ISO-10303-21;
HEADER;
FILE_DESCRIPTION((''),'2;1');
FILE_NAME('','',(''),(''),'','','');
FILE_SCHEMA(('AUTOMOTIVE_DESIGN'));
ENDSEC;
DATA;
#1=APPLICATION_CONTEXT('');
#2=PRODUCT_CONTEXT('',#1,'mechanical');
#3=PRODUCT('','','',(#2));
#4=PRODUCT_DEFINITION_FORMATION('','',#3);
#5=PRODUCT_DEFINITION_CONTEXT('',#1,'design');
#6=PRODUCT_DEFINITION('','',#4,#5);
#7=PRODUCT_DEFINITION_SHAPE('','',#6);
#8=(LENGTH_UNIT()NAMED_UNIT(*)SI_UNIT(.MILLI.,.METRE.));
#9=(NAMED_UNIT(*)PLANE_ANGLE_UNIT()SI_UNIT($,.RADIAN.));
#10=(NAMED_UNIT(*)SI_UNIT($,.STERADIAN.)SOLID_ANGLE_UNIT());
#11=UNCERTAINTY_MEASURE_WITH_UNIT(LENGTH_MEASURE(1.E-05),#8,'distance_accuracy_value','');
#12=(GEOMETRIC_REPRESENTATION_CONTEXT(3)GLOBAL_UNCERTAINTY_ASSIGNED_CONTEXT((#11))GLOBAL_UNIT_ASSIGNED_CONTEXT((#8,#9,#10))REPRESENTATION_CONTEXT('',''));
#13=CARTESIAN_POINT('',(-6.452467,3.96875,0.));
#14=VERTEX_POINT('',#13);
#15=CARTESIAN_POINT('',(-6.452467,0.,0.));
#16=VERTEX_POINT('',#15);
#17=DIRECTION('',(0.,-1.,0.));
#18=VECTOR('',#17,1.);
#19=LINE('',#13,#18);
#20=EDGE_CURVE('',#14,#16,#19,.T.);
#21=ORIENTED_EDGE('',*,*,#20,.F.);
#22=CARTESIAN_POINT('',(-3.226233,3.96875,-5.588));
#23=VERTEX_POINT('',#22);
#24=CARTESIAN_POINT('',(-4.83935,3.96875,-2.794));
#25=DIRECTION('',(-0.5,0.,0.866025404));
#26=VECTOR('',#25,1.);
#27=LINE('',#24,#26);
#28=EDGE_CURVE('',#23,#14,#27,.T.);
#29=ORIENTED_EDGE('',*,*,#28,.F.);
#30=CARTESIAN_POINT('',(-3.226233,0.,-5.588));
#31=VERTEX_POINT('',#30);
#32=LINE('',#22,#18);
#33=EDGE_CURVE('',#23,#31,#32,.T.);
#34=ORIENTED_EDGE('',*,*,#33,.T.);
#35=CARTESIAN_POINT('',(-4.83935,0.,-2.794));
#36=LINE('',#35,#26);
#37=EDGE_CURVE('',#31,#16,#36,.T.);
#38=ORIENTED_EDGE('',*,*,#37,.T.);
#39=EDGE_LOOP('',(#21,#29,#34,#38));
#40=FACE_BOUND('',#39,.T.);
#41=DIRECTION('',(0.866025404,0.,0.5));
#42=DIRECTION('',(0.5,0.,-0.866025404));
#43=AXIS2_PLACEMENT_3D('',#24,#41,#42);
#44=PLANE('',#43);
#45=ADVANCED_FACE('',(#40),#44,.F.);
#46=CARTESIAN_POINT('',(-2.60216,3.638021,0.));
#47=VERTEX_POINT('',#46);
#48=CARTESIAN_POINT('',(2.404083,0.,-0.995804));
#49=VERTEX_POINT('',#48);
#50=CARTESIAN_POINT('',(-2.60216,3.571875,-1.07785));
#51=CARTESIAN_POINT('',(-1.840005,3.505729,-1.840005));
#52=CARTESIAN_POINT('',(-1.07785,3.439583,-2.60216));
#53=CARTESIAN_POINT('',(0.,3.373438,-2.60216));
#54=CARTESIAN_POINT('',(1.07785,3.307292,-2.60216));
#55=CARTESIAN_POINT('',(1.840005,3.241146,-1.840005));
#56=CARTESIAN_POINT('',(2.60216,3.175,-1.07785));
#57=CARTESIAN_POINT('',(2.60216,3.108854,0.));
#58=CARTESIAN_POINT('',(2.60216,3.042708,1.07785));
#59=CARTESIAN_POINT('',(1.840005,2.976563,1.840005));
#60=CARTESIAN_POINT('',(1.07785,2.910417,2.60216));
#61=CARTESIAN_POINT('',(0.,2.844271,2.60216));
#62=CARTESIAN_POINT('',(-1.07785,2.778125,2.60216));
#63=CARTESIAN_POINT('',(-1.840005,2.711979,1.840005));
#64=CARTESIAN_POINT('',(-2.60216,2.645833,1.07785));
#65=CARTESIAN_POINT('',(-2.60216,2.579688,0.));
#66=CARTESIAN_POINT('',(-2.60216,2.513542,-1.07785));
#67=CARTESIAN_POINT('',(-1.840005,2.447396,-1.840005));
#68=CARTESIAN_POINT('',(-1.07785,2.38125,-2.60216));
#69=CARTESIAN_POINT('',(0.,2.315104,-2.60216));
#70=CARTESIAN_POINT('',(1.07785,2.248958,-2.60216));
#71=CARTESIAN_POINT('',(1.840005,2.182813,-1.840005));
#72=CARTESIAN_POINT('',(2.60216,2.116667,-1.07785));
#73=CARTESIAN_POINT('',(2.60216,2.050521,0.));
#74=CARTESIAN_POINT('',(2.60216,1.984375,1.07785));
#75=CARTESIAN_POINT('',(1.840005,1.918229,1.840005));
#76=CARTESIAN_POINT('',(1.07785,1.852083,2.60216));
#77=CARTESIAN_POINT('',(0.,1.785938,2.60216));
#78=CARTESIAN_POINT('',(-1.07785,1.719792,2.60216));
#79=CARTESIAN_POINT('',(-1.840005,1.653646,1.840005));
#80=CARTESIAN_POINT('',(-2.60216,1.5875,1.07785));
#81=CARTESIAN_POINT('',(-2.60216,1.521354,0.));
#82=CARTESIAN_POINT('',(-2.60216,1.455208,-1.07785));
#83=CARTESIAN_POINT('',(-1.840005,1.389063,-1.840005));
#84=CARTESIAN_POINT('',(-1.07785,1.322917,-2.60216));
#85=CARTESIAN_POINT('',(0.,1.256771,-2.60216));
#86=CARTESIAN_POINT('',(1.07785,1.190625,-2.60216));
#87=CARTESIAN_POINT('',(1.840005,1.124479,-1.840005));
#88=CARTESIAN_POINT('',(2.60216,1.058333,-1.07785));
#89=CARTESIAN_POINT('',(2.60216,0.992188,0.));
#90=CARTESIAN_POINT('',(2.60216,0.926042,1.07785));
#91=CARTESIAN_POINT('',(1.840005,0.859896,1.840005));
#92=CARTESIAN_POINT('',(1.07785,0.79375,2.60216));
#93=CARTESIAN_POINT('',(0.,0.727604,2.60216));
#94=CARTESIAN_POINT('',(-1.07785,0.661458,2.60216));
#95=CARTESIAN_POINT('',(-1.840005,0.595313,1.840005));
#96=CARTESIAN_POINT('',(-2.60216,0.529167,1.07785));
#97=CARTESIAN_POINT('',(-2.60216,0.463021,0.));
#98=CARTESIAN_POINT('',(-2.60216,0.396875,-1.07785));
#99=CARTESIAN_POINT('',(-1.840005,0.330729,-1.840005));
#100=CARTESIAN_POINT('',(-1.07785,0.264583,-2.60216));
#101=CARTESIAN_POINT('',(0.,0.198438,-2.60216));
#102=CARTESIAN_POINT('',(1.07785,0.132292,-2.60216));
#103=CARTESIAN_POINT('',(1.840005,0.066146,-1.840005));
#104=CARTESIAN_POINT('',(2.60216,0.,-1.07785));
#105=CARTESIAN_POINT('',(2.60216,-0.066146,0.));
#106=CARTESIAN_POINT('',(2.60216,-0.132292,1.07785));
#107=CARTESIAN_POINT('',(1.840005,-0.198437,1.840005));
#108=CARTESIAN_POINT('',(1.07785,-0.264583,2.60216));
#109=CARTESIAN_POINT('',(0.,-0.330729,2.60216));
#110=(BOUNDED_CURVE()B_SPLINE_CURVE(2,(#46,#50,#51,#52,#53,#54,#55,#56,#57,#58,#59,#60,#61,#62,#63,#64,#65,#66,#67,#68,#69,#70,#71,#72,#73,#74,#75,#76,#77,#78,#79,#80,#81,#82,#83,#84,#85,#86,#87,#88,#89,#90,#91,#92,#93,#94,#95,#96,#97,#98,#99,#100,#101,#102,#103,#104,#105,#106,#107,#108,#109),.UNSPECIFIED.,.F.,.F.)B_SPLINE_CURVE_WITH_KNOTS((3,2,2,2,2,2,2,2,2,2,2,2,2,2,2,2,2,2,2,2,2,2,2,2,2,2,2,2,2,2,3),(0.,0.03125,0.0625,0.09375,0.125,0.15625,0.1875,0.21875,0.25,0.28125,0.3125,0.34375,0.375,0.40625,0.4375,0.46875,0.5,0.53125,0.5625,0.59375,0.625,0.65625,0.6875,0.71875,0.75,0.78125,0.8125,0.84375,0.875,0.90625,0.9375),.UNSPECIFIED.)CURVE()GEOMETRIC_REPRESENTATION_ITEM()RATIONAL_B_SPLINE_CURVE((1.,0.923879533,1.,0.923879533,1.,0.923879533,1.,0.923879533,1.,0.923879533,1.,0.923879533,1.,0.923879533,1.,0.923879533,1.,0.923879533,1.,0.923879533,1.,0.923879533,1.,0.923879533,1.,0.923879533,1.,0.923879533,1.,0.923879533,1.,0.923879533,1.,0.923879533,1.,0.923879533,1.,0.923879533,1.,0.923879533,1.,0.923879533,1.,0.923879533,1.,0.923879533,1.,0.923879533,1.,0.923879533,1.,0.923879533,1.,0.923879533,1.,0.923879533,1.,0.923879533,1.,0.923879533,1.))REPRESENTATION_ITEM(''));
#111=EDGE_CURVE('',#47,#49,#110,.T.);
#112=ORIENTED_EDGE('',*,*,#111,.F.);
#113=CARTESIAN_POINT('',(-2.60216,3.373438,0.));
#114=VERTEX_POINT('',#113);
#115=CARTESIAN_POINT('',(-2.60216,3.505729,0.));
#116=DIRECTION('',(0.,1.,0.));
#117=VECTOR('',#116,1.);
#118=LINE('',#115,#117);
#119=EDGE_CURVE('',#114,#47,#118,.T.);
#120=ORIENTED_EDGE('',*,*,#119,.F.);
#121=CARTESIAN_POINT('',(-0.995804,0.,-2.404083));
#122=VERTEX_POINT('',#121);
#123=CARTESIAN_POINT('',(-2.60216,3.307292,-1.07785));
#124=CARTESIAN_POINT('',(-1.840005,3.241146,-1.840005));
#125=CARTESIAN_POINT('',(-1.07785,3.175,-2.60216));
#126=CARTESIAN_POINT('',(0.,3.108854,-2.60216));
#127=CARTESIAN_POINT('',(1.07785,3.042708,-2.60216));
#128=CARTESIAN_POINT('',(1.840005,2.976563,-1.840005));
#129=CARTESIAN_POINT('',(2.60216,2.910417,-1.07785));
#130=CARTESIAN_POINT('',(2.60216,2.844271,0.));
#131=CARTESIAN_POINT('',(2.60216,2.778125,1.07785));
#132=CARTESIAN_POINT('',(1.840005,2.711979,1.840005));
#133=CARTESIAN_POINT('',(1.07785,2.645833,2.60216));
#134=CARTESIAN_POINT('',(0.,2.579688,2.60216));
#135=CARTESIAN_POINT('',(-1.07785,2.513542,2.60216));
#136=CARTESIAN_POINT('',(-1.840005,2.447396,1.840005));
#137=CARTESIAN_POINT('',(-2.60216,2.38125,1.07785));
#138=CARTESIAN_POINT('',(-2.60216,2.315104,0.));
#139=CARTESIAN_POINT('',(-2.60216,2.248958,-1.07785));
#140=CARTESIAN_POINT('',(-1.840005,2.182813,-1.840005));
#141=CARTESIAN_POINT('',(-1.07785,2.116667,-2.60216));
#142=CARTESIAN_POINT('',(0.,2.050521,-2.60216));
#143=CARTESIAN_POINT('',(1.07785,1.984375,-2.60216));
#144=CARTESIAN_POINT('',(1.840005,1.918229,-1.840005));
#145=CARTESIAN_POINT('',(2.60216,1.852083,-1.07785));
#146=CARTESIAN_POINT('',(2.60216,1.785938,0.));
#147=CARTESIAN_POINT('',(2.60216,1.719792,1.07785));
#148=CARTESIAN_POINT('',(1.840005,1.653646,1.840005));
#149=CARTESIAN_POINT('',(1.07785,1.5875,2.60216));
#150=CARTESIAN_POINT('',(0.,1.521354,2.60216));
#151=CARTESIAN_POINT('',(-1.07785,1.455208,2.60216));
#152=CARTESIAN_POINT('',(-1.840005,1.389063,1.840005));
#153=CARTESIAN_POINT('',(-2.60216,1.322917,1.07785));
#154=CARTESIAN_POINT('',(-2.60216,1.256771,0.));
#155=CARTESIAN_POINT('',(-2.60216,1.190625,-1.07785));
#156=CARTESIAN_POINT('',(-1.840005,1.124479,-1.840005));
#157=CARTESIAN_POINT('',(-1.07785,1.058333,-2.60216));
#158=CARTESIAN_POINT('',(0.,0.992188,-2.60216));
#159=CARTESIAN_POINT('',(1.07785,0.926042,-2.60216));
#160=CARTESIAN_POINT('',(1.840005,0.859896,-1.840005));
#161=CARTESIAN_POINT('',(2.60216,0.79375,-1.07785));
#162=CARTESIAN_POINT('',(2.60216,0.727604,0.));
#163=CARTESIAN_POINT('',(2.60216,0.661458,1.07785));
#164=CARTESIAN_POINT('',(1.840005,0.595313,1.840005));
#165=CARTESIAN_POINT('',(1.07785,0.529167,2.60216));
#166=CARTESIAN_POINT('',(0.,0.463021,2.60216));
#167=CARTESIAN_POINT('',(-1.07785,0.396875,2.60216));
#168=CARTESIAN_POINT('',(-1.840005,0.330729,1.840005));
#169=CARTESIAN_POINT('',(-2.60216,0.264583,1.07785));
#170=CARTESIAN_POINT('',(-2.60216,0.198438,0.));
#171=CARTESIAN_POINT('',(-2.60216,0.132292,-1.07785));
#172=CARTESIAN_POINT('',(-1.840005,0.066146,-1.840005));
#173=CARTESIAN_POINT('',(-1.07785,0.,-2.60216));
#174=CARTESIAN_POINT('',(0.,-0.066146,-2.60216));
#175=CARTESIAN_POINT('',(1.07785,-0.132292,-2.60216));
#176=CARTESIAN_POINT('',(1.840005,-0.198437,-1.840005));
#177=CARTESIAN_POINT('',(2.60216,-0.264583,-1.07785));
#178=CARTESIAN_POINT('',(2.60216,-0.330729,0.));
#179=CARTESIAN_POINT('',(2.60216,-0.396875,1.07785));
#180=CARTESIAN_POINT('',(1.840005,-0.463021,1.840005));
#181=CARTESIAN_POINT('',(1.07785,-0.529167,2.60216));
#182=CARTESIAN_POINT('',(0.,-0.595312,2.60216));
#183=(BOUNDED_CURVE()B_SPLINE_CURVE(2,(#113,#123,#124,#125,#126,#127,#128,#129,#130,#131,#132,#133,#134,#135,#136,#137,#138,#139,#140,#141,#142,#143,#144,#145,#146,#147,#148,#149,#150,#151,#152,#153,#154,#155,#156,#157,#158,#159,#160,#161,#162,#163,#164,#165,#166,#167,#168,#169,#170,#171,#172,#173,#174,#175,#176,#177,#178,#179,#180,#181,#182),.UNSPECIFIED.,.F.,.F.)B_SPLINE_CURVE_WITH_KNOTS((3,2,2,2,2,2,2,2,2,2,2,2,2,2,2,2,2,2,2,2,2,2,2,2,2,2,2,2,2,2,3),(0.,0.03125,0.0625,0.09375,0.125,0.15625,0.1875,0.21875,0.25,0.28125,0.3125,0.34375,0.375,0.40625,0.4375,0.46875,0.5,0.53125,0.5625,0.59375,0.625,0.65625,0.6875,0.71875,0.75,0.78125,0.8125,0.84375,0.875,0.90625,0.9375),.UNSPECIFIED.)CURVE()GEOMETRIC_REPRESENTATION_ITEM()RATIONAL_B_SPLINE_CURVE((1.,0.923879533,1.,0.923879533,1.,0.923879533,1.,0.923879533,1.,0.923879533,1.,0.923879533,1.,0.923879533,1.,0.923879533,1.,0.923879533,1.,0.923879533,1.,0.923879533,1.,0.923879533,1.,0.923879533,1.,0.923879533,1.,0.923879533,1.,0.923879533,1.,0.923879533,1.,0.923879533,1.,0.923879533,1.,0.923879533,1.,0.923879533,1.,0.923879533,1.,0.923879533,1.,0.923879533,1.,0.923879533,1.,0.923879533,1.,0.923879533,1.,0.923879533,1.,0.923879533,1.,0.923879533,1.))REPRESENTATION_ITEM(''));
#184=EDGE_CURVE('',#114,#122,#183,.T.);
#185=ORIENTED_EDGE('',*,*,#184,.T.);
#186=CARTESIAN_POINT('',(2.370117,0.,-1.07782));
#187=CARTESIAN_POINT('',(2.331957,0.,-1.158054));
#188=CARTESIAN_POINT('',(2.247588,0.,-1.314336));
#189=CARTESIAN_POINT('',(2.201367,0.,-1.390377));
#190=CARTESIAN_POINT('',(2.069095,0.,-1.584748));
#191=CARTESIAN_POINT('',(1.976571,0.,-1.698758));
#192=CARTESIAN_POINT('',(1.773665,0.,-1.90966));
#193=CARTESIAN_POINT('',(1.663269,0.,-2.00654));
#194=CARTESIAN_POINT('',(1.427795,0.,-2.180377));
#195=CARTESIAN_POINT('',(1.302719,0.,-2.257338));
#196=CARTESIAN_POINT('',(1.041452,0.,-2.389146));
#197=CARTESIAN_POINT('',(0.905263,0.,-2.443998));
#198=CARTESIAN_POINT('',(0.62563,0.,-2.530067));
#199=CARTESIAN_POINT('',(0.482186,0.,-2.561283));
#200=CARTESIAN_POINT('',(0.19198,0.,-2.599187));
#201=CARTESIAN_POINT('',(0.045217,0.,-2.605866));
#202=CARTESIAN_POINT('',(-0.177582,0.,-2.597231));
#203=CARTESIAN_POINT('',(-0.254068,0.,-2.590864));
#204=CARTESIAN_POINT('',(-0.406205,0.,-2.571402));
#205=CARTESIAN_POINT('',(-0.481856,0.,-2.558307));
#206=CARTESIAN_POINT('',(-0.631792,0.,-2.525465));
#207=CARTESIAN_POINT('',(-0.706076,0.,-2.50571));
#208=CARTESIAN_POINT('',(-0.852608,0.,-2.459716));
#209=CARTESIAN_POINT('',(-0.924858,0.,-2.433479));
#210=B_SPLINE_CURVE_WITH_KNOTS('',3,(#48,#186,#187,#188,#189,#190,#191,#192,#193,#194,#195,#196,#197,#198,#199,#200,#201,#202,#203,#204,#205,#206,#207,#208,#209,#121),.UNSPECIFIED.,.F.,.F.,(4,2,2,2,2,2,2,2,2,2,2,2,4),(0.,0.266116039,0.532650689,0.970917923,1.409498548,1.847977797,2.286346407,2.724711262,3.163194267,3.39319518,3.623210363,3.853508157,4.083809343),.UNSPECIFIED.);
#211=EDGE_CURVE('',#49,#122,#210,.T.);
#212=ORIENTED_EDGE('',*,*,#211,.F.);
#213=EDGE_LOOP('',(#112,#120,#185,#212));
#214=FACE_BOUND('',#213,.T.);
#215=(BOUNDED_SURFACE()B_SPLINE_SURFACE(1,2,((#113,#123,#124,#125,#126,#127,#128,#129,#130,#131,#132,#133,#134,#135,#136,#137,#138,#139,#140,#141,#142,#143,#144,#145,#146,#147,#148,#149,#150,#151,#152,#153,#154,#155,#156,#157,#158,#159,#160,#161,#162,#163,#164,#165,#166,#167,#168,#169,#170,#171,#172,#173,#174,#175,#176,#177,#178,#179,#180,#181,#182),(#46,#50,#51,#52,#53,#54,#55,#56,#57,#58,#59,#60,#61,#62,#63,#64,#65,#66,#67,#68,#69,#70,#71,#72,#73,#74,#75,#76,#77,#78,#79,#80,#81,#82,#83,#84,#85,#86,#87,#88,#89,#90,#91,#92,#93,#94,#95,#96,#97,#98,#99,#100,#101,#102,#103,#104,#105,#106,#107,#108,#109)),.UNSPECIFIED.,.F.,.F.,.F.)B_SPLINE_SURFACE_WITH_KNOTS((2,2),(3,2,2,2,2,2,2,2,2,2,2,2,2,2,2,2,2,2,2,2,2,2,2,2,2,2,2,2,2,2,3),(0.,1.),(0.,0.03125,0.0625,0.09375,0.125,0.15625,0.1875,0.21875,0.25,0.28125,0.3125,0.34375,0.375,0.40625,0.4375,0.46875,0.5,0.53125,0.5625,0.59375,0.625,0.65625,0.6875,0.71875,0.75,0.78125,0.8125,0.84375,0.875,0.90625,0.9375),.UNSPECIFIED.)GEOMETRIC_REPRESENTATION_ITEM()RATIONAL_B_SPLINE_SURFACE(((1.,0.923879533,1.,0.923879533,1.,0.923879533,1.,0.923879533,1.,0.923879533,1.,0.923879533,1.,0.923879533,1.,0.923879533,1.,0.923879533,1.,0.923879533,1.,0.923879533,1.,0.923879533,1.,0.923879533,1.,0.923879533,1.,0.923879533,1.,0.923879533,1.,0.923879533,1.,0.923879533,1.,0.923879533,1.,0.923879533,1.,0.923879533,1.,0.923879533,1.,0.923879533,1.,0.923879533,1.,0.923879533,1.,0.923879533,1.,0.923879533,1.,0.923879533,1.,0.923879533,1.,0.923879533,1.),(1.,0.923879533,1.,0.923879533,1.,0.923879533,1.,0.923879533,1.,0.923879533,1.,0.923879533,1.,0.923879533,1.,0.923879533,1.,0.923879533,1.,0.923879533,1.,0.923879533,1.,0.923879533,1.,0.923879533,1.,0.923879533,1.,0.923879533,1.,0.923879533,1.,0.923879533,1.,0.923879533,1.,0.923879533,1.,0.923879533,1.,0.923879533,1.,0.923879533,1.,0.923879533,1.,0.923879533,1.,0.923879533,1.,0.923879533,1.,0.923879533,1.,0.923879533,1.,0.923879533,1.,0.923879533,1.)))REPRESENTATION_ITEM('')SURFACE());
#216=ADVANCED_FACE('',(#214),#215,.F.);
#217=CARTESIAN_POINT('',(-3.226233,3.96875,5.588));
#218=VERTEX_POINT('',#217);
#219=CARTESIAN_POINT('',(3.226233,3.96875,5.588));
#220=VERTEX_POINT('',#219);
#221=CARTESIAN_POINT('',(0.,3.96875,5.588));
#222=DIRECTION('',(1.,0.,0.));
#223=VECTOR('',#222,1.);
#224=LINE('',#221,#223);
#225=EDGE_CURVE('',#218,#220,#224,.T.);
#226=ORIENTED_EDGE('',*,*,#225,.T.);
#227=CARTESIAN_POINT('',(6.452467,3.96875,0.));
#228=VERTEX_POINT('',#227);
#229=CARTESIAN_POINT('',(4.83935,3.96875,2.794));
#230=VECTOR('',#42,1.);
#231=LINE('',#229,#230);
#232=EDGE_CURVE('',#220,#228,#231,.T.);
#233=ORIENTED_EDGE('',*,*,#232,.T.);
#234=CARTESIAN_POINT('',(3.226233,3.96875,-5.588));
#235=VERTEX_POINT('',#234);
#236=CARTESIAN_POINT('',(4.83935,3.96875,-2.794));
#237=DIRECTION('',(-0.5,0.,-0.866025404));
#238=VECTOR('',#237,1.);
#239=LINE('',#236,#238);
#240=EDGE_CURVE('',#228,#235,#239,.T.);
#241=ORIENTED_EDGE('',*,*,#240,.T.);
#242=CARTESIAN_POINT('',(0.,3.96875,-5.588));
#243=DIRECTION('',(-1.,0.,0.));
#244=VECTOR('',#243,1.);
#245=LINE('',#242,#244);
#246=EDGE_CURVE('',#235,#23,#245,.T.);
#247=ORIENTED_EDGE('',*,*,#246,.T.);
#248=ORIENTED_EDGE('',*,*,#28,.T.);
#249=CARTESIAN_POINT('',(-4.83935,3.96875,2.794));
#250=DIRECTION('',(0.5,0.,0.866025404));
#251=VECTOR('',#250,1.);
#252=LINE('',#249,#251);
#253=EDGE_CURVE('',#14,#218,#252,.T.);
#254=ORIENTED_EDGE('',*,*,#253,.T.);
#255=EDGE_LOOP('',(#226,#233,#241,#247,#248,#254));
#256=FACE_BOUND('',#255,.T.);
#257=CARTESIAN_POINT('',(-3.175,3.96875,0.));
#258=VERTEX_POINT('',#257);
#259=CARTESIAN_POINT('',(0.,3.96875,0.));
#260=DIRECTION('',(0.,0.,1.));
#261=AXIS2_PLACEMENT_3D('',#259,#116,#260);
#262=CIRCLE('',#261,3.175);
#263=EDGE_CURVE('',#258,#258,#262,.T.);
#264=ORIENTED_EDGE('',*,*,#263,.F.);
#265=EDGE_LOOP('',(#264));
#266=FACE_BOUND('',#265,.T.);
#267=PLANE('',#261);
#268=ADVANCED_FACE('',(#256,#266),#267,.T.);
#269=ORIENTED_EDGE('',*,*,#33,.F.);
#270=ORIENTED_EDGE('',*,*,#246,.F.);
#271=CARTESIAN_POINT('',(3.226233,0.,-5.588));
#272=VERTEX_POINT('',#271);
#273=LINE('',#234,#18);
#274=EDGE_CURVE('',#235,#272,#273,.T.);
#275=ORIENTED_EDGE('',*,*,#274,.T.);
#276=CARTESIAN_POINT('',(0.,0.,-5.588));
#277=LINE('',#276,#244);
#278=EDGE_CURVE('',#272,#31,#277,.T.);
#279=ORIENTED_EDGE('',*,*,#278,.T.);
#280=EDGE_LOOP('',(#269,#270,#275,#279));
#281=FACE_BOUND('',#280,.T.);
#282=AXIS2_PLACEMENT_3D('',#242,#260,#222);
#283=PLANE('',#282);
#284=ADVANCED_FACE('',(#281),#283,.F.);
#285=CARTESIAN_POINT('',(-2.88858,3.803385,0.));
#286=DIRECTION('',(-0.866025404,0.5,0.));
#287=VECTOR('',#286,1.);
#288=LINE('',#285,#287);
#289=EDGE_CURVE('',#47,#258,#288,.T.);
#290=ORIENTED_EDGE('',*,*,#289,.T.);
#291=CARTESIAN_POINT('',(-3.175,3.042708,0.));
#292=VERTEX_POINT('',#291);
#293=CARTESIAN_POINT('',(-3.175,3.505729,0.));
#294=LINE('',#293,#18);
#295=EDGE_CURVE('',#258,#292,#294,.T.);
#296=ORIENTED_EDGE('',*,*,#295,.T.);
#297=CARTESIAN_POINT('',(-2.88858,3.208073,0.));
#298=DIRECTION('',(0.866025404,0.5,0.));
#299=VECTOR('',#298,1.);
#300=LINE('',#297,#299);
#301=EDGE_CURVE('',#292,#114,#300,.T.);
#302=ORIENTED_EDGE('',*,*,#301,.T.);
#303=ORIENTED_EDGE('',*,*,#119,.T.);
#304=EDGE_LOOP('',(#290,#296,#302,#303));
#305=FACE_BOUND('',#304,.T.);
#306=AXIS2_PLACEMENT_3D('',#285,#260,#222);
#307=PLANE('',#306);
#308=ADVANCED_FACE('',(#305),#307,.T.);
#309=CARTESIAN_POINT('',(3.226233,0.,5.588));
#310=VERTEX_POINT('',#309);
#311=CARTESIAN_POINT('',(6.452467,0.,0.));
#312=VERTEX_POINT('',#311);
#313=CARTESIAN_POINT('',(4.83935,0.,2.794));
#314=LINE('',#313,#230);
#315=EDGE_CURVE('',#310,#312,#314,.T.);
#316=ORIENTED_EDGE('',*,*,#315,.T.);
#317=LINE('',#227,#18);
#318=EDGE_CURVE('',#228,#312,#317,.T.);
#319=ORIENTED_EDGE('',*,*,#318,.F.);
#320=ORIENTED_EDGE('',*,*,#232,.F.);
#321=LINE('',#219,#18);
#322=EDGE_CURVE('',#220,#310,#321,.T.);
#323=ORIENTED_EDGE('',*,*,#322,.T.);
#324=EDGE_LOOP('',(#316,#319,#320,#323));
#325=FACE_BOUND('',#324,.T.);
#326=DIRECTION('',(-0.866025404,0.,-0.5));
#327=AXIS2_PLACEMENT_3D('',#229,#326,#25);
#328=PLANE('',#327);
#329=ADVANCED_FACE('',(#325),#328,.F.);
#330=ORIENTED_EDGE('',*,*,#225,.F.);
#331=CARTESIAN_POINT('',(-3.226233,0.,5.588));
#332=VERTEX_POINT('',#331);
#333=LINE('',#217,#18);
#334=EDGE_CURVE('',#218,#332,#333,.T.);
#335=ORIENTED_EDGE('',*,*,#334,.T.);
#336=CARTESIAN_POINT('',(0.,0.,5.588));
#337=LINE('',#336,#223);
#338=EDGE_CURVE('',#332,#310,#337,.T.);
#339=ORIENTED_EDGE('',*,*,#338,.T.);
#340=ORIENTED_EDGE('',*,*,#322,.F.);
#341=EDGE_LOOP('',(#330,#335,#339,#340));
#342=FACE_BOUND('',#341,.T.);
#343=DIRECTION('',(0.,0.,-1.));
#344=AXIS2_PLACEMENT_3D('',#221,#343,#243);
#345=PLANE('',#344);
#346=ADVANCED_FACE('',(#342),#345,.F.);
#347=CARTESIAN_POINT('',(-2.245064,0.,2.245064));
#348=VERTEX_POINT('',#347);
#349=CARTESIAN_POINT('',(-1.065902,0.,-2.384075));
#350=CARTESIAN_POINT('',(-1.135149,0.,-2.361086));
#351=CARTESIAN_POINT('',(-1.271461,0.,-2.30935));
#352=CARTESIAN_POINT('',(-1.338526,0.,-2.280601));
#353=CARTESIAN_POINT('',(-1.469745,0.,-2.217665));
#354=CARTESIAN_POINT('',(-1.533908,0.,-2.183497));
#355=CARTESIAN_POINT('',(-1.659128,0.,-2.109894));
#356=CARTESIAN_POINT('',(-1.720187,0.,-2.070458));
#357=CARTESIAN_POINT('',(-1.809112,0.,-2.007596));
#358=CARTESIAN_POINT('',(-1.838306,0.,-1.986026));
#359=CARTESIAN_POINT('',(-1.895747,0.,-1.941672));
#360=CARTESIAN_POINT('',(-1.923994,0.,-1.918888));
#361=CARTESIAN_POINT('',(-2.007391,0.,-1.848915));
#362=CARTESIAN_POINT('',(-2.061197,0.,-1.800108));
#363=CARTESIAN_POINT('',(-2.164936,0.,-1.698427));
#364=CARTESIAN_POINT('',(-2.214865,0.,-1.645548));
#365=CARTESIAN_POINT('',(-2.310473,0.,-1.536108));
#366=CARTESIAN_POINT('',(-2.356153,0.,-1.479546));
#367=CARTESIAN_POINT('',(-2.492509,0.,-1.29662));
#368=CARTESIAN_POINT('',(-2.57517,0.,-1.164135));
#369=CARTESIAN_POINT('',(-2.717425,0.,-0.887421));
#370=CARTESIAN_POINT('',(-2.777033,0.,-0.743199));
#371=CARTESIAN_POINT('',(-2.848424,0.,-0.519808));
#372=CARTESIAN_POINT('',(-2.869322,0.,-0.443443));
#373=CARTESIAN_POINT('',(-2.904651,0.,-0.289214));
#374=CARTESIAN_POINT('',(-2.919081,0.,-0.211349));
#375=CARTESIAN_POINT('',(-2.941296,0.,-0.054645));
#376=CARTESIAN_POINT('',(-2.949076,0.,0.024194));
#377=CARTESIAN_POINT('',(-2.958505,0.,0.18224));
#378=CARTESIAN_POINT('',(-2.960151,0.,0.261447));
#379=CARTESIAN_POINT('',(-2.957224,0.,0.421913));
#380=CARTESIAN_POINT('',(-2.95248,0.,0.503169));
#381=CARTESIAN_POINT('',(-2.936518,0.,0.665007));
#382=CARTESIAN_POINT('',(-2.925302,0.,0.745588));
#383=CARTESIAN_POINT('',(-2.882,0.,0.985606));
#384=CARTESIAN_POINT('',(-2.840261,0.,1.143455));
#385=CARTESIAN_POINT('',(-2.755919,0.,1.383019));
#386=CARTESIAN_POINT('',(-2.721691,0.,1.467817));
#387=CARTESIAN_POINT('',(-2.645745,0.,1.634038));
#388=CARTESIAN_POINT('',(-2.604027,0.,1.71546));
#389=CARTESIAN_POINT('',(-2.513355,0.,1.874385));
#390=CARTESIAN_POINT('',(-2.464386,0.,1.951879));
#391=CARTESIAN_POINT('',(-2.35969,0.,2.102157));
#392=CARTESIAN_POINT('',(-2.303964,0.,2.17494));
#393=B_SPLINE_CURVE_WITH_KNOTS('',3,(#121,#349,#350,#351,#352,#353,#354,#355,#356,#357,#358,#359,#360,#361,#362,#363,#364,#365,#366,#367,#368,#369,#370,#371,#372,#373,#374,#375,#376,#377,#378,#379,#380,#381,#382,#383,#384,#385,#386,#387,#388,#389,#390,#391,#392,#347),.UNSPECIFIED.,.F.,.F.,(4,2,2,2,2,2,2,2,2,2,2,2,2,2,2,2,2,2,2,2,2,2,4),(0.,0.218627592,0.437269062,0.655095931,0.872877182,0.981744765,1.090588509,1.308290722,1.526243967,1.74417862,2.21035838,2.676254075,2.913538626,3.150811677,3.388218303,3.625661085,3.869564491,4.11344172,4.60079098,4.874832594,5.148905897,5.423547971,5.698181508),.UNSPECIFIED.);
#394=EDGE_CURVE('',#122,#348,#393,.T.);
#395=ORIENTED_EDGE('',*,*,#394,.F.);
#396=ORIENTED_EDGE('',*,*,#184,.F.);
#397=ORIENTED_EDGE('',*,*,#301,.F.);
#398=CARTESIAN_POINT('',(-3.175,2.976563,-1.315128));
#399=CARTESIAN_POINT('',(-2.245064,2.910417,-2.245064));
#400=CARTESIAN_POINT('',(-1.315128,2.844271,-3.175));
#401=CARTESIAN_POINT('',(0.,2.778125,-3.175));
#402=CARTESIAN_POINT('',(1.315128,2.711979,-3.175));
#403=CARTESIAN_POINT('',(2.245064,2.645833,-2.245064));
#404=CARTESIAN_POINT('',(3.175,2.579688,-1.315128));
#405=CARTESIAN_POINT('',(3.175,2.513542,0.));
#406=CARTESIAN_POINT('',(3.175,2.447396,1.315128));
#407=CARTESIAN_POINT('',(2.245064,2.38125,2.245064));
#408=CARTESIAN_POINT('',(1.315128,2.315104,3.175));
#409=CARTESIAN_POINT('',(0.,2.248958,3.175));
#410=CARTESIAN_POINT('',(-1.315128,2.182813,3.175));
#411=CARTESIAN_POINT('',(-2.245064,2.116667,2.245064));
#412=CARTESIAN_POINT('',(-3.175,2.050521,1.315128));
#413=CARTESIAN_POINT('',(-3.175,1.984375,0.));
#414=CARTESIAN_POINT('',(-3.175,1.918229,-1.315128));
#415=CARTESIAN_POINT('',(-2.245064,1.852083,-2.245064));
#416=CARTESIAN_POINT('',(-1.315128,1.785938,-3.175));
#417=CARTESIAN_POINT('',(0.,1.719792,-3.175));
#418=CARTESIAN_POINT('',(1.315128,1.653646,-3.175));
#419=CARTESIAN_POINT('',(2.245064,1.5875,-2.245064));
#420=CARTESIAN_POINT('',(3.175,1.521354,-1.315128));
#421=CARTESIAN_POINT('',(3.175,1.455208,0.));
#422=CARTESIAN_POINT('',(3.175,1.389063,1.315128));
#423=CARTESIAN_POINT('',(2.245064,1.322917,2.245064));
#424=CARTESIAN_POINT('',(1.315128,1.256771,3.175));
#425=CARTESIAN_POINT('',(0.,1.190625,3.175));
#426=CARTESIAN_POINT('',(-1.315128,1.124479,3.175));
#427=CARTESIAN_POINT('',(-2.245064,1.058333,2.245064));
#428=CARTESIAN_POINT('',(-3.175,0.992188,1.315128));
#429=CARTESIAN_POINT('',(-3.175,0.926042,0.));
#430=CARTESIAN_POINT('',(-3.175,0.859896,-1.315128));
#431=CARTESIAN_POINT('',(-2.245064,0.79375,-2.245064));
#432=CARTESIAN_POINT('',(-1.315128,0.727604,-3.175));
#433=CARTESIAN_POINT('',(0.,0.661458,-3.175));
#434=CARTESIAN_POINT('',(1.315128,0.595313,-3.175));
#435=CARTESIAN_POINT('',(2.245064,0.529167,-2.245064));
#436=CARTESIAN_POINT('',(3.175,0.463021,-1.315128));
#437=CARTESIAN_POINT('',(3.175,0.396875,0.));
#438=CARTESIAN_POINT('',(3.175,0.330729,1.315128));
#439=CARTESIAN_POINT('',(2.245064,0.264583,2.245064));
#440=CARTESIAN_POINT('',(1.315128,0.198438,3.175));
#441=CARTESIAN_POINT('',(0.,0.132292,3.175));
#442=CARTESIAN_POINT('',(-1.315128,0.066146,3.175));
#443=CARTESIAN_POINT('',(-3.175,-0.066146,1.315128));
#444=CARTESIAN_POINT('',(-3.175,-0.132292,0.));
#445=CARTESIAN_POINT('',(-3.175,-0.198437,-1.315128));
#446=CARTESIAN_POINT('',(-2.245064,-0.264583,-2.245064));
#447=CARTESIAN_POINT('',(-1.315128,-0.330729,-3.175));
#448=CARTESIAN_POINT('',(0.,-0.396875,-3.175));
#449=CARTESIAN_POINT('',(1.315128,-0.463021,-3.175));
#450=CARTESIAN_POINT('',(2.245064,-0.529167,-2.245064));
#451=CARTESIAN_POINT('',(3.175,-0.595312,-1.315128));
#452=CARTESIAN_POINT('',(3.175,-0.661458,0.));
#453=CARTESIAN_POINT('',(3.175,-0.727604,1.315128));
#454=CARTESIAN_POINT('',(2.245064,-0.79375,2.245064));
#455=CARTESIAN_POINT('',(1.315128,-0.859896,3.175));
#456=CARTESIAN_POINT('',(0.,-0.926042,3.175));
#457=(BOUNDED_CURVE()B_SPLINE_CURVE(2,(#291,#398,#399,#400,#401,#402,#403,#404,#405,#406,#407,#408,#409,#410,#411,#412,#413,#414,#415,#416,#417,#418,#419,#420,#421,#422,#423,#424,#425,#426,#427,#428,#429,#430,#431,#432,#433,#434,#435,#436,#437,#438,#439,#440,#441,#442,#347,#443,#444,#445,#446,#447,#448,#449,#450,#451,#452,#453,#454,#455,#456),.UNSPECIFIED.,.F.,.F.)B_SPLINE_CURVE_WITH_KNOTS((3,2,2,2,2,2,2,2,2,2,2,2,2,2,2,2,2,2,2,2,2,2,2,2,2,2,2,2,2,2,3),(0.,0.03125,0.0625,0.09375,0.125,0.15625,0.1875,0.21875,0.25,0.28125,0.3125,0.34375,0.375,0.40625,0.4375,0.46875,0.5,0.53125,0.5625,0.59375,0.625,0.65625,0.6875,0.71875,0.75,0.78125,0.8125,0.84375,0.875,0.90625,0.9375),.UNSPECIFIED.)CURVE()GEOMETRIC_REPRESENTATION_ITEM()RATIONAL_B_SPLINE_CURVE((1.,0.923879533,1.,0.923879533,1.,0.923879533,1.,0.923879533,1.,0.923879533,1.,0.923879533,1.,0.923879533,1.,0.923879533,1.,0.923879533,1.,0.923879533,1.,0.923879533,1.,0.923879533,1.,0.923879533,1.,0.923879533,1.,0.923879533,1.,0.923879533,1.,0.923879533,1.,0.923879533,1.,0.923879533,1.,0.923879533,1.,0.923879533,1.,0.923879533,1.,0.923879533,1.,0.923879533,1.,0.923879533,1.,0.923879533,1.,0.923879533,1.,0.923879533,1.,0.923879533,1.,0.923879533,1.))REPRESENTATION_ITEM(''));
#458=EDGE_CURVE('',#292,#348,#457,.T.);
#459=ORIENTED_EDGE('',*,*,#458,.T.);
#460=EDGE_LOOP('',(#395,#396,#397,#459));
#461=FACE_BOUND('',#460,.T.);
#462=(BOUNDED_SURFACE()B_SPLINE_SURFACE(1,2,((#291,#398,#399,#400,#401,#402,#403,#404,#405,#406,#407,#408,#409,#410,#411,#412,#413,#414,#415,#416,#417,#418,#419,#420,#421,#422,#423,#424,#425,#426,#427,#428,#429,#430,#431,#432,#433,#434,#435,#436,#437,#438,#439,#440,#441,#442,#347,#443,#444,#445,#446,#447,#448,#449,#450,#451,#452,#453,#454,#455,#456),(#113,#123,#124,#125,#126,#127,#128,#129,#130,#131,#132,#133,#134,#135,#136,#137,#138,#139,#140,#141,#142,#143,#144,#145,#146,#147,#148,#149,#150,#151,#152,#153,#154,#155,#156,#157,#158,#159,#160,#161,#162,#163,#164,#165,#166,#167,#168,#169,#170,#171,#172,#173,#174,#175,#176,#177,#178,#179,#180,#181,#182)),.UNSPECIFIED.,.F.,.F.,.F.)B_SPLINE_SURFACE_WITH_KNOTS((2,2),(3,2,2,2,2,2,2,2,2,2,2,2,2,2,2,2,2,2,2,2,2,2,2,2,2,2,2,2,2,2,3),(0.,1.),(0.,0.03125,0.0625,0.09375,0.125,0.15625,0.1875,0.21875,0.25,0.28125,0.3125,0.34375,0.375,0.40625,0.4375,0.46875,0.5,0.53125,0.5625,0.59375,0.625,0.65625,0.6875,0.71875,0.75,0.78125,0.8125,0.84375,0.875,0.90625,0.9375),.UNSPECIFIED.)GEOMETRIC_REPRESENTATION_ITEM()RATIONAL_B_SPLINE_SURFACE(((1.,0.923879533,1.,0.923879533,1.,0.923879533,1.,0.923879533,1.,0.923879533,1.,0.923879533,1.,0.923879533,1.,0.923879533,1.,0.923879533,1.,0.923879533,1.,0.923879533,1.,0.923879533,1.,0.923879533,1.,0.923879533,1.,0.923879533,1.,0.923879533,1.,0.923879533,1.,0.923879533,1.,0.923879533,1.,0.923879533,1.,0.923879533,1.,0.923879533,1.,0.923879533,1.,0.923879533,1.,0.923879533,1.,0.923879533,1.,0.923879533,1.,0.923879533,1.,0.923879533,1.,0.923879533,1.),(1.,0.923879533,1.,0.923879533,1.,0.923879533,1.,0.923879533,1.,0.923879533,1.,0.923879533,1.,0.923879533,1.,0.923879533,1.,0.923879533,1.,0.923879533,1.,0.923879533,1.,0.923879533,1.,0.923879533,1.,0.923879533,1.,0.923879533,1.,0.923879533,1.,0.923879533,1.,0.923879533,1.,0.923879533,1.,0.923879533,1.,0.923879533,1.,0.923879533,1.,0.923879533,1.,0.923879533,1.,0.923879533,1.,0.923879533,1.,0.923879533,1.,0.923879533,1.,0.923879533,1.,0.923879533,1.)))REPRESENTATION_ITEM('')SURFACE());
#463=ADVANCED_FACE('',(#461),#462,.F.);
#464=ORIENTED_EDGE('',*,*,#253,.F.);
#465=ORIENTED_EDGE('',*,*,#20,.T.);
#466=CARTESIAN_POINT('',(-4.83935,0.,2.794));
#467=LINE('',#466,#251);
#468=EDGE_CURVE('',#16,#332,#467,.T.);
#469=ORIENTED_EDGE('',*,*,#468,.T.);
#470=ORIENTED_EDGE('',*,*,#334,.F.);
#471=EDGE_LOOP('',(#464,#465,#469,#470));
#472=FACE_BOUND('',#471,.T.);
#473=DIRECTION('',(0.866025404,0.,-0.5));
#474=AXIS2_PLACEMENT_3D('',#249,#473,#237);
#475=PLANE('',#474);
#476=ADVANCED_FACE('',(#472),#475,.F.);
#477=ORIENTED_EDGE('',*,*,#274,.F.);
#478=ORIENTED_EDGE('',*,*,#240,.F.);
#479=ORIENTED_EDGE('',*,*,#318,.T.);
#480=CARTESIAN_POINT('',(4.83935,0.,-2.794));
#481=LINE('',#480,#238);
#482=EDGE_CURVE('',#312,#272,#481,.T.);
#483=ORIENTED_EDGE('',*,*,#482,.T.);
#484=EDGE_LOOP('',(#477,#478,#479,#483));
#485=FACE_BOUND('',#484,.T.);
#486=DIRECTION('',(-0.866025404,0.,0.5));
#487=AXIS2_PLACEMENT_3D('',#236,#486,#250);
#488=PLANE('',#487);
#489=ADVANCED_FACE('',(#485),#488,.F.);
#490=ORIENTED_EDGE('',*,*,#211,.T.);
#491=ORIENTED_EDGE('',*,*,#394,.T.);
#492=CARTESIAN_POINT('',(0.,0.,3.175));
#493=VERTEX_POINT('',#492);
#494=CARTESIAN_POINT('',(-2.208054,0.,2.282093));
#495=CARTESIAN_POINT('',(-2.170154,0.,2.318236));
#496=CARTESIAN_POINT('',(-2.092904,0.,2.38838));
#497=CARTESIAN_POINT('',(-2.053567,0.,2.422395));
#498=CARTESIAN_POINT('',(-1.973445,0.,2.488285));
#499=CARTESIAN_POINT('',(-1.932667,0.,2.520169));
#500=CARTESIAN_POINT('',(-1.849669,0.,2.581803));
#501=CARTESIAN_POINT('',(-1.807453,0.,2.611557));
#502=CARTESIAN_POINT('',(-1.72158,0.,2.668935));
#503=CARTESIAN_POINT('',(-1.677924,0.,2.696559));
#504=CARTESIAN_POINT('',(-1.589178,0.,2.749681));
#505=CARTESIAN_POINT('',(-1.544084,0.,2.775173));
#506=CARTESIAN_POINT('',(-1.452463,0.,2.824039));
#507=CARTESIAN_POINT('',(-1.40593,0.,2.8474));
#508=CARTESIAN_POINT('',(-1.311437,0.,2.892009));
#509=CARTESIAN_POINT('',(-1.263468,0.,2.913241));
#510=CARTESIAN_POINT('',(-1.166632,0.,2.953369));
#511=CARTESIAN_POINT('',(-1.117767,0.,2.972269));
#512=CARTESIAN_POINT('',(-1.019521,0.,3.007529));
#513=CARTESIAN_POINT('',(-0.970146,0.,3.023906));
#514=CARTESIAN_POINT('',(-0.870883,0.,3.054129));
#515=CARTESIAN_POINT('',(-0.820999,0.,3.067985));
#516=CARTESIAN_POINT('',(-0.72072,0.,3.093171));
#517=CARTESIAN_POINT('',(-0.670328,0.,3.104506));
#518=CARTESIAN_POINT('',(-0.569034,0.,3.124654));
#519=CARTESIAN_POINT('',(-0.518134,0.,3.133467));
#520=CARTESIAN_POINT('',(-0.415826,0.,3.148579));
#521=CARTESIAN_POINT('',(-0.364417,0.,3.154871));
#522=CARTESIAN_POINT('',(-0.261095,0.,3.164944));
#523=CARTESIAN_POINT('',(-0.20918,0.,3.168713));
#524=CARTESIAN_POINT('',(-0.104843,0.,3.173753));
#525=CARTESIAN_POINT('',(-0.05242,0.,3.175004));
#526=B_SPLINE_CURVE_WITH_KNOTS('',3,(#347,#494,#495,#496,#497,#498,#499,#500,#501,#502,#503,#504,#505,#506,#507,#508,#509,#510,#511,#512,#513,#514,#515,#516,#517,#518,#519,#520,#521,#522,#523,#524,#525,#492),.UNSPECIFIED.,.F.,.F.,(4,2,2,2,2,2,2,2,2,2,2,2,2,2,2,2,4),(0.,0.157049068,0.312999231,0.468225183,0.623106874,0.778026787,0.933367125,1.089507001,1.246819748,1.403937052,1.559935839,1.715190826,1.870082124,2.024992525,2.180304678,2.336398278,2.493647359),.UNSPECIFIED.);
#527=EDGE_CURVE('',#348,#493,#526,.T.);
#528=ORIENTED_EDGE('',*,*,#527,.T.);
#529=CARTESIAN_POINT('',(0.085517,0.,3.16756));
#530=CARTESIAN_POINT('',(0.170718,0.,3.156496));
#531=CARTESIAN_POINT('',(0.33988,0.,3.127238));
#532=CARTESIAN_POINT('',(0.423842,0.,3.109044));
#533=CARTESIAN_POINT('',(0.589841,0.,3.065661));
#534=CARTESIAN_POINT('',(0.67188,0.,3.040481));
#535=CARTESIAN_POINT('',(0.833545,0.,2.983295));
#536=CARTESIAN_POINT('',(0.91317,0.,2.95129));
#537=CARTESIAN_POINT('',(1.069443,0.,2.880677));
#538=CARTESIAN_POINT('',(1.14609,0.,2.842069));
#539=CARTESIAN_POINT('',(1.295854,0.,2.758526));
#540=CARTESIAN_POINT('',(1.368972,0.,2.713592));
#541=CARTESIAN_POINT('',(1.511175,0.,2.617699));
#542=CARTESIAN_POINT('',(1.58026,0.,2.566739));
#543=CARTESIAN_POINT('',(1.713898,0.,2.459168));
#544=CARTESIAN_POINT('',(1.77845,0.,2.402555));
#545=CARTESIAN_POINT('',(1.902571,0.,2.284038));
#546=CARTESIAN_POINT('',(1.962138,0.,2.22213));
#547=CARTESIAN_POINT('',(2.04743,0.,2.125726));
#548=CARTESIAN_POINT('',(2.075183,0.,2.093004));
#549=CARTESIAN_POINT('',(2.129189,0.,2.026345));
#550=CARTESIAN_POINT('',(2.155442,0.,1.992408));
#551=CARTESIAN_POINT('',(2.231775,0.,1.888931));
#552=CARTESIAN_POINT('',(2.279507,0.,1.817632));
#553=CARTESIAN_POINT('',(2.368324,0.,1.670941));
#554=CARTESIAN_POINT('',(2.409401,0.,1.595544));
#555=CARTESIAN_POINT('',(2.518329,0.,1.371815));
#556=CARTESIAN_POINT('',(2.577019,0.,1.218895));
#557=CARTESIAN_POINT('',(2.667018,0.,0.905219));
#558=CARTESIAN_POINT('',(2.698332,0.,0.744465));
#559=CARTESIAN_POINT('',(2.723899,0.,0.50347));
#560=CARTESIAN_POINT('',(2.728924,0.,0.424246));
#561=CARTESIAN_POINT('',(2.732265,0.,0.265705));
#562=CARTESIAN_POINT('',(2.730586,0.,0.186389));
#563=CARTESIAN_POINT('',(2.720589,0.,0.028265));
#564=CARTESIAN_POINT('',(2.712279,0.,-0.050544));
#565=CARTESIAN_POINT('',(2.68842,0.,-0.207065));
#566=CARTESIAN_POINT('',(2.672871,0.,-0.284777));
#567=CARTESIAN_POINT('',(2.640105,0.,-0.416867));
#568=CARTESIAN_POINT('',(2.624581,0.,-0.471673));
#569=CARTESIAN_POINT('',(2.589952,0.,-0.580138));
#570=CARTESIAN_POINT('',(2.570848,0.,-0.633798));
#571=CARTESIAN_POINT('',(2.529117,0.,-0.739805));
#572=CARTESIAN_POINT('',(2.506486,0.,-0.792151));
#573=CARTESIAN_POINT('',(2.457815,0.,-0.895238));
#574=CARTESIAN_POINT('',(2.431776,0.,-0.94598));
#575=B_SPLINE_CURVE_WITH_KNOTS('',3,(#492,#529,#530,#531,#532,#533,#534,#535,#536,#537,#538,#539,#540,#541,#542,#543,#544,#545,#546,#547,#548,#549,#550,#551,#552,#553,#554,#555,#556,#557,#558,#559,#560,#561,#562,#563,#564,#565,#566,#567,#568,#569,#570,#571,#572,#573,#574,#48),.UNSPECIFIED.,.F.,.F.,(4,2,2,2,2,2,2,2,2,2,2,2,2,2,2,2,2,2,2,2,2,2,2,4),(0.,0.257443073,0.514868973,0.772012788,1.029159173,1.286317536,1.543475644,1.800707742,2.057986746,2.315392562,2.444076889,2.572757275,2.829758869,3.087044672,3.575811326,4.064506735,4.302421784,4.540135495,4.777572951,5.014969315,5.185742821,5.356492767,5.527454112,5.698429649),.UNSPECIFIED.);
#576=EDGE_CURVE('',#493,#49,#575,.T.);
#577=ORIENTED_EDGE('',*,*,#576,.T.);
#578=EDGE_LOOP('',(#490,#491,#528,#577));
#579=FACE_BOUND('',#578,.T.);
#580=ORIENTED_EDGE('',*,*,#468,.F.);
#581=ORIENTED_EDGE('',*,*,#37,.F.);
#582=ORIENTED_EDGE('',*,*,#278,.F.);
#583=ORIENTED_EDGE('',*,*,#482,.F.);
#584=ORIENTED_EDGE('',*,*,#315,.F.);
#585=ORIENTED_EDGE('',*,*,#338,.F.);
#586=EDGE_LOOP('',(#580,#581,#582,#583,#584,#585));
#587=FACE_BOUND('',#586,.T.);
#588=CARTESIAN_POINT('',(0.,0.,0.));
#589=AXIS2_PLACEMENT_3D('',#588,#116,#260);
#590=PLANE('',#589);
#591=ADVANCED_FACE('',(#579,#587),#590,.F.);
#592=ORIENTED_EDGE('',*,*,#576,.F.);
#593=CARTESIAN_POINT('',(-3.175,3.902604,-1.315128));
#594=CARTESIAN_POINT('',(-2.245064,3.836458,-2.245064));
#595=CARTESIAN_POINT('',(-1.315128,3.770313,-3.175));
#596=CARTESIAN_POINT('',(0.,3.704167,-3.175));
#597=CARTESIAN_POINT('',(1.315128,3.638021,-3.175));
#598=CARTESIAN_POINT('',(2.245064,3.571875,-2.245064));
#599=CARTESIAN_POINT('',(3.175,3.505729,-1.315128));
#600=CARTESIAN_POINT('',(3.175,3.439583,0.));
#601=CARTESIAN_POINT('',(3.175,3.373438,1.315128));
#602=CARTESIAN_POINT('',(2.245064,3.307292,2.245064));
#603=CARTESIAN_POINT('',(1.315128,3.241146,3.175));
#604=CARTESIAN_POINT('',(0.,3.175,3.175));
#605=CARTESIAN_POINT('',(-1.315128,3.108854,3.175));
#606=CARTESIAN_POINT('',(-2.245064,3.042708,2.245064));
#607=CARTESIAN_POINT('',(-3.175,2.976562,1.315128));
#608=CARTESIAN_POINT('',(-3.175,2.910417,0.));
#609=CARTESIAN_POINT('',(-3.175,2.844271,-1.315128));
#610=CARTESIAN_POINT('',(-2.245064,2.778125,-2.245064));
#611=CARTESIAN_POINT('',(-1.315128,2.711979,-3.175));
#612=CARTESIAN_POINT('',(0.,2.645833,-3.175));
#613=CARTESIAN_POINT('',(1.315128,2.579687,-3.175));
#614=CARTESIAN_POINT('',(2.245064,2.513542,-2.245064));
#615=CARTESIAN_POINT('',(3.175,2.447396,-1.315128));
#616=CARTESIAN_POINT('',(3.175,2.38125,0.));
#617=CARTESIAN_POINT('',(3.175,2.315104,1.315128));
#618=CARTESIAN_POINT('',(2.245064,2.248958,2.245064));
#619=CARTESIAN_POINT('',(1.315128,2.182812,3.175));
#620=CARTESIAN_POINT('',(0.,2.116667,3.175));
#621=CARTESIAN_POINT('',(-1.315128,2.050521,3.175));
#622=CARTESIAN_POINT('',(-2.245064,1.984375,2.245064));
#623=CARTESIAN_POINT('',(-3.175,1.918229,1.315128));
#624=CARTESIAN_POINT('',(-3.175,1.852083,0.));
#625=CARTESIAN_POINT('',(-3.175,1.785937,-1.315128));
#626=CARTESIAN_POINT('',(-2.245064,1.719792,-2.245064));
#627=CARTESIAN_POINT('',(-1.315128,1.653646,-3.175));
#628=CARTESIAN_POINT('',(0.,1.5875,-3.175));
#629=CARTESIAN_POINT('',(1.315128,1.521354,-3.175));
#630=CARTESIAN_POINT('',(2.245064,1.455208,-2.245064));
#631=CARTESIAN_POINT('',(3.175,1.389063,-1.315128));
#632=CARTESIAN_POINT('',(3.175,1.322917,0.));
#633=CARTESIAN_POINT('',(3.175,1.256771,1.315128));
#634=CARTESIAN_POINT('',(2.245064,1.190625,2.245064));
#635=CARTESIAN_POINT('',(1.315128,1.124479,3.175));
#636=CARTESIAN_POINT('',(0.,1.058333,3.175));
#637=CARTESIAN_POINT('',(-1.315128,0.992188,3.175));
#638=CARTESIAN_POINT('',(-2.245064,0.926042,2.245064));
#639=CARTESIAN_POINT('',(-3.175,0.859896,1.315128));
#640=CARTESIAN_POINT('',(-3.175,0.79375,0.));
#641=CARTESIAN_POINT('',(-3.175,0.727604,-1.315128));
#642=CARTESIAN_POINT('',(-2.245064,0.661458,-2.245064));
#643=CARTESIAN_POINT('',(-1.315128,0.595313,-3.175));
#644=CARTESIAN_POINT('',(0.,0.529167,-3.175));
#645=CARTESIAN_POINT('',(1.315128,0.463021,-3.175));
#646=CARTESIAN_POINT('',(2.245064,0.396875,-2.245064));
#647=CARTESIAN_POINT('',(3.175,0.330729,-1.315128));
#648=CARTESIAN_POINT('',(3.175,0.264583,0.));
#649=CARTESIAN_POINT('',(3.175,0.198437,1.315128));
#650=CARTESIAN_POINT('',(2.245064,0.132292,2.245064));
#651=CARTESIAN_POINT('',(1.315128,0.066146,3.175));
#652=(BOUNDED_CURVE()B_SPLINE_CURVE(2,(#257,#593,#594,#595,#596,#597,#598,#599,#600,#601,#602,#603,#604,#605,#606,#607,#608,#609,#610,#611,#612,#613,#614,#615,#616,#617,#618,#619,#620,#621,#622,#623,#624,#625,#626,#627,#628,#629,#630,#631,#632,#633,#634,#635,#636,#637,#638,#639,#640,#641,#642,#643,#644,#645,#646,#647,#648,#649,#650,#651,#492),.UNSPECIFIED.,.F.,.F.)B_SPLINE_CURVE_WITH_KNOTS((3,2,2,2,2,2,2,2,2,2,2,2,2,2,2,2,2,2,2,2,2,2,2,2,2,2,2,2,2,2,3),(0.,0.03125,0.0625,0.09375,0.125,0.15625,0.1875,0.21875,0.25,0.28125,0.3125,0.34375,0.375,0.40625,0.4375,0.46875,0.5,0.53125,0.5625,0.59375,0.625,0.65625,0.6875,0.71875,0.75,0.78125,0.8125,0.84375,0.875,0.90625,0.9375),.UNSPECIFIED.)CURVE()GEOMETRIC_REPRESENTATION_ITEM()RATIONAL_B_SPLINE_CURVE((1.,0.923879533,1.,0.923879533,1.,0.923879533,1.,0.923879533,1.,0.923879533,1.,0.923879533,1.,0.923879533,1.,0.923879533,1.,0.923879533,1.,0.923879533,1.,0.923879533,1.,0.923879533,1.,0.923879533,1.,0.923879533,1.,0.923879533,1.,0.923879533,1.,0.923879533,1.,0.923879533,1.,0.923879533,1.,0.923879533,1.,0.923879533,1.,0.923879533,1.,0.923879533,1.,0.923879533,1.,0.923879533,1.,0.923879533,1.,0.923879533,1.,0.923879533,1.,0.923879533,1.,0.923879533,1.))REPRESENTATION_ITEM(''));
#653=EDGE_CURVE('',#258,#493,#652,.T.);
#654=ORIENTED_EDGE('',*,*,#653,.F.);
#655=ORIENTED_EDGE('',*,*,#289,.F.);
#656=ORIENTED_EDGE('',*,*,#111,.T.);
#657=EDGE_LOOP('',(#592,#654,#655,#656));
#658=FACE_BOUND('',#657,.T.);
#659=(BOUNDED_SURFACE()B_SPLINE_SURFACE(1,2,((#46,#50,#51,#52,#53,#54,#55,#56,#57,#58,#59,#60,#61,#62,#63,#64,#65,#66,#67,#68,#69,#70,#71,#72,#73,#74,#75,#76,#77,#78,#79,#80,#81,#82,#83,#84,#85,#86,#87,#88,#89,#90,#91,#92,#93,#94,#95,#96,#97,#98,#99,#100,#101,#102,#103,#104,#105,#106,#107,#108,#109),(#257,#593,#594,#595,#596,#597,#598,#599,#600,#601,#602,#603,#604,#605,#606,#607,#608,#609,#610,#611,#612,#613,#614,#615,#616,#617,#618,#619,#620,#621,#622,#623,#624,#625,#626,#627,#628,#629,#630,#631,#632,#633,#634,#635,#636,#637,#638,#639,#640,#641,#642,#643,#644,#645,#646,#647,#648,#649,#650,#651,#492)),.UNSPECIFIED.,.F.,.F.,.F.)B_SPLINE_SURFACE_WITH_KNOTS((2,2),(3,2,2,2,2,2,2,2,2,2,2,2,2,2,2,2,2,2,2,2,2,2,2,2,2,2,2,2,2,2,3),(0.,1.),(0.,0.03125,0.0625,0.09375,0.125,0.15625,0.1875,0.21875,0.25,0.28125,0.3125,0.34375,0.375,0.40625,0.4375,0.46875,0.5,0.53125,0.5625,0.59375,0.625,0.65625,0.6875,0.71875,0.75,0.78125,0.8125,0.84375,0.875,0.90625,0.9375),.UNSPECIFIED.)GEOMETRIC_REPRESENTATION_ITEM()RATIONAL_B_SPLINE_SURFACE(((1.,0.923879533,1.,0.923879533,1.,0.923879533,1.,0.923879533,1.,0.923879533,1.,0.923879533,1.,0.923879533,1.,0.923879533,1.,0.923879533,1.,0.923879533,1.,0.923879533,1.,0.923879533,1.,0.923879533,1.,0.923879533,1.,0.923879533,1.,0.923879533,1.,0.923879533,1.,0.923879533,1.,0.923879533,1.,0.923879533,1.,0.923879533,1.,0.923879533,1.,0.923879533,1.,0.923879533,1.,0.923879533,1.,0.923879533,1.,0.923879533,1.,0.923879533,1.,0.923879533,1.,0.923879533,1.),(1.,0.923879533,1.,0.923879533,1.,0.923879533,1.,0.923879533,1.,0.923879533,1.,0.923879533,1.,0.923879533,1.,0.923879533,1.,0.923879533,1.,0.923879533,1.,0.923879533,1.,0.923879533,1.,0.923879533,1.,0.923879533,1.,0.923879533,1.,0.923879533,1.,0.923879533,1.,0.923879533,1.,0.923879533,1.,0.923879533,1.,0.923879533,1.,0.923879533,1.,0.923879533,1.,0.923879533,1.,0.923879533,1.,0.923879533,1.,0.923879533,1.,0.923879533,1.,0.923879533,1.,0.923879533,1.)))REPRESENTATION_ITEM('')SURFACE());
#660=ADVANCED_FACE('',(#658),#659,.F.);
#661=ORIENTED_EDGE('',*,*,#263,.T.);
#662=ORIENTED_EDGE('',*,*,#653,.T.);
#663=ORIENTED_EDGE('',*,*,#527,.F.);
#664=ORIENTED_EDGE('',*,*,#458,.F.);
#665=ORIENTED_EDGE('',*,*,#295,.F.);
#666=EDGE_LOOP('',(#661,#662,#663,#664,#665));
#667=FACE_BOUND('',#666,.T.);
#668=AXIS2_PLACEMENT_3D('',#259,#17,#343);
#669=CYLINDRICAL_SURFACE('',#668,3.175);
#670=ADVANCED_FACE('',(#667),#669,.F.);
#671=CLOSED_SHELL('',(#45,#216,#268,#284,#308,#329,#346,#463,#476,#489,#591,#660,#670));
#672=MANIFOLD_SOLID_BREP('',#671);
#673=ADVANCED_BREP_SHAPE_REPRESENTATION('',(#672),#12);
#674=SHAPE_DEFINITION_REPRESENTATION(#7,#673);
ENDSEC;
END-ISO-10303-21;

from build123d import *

# Parameters (mm, degrees)
SKETCH1_R           = 3.175
BOSS_EXTRUDE3_DEPTH = 3.96875
THREAD1_PITCH       = 1.058333333
SKETCH5_W           = 11.495261482
SKETCH5_H           = 9.373628012
CUT_EXTRUDE1_DEPTH  = 3.96875


with BuildPart() as part:
    # Sketch1 → Boss-Extrude3 (new body)
    with BuildSketch(Plane(origin=(0, 0, 0), x_dir=(1, 0, 0), z_dir=(0, 1, 0))):
        Polygon((-3.226233304, -5.588), (3.226233304, -5.588), (6.452466608, 0), (3.226233304, 5.588), (-3.226233304, 5.588), (-6.452466608, 0), align=None)
        with Locations(Location((0, 0, 0), (0, 0, 270))):
            Circle(SKETCH1_R, mode=Mode.SUBTRACT)
    extrude(amount=BOSS_EXTRUDE3_DEPTH)

    # Thread1: the profile of Thread Profile1 profile screwed along a right-hand helix of 3.75 turns, 8 arcs to a turn; built about Z, then put on its axis
    thread1_z = Axis((0, 0, 0), (0, 0, 1))
    thread1_corners = [(3.1753, 0, -0.000173205), (3.1753, 0, 0.926214869), (2.602160282, 0, 0.595312499), (2.602160282, 0, 0.330729165)]
    with BuildLine(mode=Mode.PRIVATE) as thread1_profile:
        Line(thread1_corners[0], thread1_corners[1])
        Line(thread1_corners[1], thread1_corners[2])
        Line(thread1_corners[2], thread1_corners[3])
        Line(thread1_corners[3], thread1_corners[0])
    thread1_cap = Face(thread1_profile.wire())
    thread1_turn_angles = [0, 22.5, 45, 67.5, 90, 112.5, 135, 157.5, 180, 202.5, 225, 247.5, 270, 292.5, 315, 337.5, 360]
    thread1_turn_weights = [1, 0.9238795325112867, 1, 0.9238795325112867, 1, 0.9238795325112867, 1, 0.9238795325112867, 1, 0.9238795325112867, 1, 0.9238795325112867, 1, 0.9238795325112867, 1, 0.9238795325112867, 1]
    thread1_turn_rails = [Edge.make_bspline([Vector(p[0], p[1], 0).rotate(thread1_z, thread1_turn_angles[k]) / thread1_turn_weights[k] + Vector(0, 0, p[2] + THREAD1_PITCH * thread1_turn_angles[k] / 360) for k in range(17)], [0, 0, 0, 1, 1, 2, 2, 3, 3, 4, 4, 5, 5, 6, 6, 7, 7, 8, 8, 8], 2, thread1_turn_weights) for p in thread1_corners]
    thread1_turn_sides = [Face.make_surface_from_curves(thread1_turn_rails[p[0]], thread1_turn_rails[p[1]]) for p in [(0, 1), (1, 2), (2, 3), (3, 0)]]
    thread1_last_angles = [1080, 1102.5, 1125, 1147.5, 1170, 1192.5, 1215, 1237.5, 1260, 1282.5, 1305, 1327.5, 1350]
    thread1_last_weights = [1, 0.9238795325112867, 1, 0.9238795325112867, 1, 0.9238795325112867, 1, 0.9238795325112867, 1, 0.9238795325112867, 1, 0.923879532511286, 1]
    thread1_last_rails = [Edge.make_bspline([Vector(p[0], p[1], 0).rotate(thread1_z, thread1_last_angles[k]) / thread1_last_weights[k] + Vector(0, 0, p[2] + THREAD1_PITCH * thread1_last_angles[k] / 360) for k in range(13)], [0, 0, 0, 1, 1, 2, 2, 3, 3, 4, 4, 5, 5, 6, 6, 6], 2, thread1_last_weights) for p in thread1_corners]
    thread1_last_sides = [Face.make_surface_from_curves(thread1_last_rails[p[0]], thread1_last_rails[p[1]]) for p in [(0, 1), (1, 2), (2, 3), (3, 0)]]
    thread1 = Plane(origin=(0, 3.96875, 0), x_dir=(-1, 0, 0), z_dir=(0, -1, 0)) * Solid(Shell([*[p.moved(Location((0, 0, THREAD1_PITCH * i))) for i in range(3) for p in thread1_turn_sides], *thread1_last_sides, thread1_cap, thread1_cap.rotate(thread1_z, 1350).moved(Location((0, 0, THREAD1_PITCH * 1350 / 360)))]))
    add(thread1)

    # Sketch5 → Cut-Extrude1 (cut)
    with BuildSketch(Plane(origin=(0, 0, 0), x_dir=(-1, 0, 0), z_dir=(0, -1, 0))):
        with Locations((0.048050932, -0.317875398)):
            Rectangle(SKETCH5_W, SKETCH5_H)
    extrude(amount=CUT_EXTRUDE1_DEPTH, mode=Mode.SUBTRACT)


solid = part.part
